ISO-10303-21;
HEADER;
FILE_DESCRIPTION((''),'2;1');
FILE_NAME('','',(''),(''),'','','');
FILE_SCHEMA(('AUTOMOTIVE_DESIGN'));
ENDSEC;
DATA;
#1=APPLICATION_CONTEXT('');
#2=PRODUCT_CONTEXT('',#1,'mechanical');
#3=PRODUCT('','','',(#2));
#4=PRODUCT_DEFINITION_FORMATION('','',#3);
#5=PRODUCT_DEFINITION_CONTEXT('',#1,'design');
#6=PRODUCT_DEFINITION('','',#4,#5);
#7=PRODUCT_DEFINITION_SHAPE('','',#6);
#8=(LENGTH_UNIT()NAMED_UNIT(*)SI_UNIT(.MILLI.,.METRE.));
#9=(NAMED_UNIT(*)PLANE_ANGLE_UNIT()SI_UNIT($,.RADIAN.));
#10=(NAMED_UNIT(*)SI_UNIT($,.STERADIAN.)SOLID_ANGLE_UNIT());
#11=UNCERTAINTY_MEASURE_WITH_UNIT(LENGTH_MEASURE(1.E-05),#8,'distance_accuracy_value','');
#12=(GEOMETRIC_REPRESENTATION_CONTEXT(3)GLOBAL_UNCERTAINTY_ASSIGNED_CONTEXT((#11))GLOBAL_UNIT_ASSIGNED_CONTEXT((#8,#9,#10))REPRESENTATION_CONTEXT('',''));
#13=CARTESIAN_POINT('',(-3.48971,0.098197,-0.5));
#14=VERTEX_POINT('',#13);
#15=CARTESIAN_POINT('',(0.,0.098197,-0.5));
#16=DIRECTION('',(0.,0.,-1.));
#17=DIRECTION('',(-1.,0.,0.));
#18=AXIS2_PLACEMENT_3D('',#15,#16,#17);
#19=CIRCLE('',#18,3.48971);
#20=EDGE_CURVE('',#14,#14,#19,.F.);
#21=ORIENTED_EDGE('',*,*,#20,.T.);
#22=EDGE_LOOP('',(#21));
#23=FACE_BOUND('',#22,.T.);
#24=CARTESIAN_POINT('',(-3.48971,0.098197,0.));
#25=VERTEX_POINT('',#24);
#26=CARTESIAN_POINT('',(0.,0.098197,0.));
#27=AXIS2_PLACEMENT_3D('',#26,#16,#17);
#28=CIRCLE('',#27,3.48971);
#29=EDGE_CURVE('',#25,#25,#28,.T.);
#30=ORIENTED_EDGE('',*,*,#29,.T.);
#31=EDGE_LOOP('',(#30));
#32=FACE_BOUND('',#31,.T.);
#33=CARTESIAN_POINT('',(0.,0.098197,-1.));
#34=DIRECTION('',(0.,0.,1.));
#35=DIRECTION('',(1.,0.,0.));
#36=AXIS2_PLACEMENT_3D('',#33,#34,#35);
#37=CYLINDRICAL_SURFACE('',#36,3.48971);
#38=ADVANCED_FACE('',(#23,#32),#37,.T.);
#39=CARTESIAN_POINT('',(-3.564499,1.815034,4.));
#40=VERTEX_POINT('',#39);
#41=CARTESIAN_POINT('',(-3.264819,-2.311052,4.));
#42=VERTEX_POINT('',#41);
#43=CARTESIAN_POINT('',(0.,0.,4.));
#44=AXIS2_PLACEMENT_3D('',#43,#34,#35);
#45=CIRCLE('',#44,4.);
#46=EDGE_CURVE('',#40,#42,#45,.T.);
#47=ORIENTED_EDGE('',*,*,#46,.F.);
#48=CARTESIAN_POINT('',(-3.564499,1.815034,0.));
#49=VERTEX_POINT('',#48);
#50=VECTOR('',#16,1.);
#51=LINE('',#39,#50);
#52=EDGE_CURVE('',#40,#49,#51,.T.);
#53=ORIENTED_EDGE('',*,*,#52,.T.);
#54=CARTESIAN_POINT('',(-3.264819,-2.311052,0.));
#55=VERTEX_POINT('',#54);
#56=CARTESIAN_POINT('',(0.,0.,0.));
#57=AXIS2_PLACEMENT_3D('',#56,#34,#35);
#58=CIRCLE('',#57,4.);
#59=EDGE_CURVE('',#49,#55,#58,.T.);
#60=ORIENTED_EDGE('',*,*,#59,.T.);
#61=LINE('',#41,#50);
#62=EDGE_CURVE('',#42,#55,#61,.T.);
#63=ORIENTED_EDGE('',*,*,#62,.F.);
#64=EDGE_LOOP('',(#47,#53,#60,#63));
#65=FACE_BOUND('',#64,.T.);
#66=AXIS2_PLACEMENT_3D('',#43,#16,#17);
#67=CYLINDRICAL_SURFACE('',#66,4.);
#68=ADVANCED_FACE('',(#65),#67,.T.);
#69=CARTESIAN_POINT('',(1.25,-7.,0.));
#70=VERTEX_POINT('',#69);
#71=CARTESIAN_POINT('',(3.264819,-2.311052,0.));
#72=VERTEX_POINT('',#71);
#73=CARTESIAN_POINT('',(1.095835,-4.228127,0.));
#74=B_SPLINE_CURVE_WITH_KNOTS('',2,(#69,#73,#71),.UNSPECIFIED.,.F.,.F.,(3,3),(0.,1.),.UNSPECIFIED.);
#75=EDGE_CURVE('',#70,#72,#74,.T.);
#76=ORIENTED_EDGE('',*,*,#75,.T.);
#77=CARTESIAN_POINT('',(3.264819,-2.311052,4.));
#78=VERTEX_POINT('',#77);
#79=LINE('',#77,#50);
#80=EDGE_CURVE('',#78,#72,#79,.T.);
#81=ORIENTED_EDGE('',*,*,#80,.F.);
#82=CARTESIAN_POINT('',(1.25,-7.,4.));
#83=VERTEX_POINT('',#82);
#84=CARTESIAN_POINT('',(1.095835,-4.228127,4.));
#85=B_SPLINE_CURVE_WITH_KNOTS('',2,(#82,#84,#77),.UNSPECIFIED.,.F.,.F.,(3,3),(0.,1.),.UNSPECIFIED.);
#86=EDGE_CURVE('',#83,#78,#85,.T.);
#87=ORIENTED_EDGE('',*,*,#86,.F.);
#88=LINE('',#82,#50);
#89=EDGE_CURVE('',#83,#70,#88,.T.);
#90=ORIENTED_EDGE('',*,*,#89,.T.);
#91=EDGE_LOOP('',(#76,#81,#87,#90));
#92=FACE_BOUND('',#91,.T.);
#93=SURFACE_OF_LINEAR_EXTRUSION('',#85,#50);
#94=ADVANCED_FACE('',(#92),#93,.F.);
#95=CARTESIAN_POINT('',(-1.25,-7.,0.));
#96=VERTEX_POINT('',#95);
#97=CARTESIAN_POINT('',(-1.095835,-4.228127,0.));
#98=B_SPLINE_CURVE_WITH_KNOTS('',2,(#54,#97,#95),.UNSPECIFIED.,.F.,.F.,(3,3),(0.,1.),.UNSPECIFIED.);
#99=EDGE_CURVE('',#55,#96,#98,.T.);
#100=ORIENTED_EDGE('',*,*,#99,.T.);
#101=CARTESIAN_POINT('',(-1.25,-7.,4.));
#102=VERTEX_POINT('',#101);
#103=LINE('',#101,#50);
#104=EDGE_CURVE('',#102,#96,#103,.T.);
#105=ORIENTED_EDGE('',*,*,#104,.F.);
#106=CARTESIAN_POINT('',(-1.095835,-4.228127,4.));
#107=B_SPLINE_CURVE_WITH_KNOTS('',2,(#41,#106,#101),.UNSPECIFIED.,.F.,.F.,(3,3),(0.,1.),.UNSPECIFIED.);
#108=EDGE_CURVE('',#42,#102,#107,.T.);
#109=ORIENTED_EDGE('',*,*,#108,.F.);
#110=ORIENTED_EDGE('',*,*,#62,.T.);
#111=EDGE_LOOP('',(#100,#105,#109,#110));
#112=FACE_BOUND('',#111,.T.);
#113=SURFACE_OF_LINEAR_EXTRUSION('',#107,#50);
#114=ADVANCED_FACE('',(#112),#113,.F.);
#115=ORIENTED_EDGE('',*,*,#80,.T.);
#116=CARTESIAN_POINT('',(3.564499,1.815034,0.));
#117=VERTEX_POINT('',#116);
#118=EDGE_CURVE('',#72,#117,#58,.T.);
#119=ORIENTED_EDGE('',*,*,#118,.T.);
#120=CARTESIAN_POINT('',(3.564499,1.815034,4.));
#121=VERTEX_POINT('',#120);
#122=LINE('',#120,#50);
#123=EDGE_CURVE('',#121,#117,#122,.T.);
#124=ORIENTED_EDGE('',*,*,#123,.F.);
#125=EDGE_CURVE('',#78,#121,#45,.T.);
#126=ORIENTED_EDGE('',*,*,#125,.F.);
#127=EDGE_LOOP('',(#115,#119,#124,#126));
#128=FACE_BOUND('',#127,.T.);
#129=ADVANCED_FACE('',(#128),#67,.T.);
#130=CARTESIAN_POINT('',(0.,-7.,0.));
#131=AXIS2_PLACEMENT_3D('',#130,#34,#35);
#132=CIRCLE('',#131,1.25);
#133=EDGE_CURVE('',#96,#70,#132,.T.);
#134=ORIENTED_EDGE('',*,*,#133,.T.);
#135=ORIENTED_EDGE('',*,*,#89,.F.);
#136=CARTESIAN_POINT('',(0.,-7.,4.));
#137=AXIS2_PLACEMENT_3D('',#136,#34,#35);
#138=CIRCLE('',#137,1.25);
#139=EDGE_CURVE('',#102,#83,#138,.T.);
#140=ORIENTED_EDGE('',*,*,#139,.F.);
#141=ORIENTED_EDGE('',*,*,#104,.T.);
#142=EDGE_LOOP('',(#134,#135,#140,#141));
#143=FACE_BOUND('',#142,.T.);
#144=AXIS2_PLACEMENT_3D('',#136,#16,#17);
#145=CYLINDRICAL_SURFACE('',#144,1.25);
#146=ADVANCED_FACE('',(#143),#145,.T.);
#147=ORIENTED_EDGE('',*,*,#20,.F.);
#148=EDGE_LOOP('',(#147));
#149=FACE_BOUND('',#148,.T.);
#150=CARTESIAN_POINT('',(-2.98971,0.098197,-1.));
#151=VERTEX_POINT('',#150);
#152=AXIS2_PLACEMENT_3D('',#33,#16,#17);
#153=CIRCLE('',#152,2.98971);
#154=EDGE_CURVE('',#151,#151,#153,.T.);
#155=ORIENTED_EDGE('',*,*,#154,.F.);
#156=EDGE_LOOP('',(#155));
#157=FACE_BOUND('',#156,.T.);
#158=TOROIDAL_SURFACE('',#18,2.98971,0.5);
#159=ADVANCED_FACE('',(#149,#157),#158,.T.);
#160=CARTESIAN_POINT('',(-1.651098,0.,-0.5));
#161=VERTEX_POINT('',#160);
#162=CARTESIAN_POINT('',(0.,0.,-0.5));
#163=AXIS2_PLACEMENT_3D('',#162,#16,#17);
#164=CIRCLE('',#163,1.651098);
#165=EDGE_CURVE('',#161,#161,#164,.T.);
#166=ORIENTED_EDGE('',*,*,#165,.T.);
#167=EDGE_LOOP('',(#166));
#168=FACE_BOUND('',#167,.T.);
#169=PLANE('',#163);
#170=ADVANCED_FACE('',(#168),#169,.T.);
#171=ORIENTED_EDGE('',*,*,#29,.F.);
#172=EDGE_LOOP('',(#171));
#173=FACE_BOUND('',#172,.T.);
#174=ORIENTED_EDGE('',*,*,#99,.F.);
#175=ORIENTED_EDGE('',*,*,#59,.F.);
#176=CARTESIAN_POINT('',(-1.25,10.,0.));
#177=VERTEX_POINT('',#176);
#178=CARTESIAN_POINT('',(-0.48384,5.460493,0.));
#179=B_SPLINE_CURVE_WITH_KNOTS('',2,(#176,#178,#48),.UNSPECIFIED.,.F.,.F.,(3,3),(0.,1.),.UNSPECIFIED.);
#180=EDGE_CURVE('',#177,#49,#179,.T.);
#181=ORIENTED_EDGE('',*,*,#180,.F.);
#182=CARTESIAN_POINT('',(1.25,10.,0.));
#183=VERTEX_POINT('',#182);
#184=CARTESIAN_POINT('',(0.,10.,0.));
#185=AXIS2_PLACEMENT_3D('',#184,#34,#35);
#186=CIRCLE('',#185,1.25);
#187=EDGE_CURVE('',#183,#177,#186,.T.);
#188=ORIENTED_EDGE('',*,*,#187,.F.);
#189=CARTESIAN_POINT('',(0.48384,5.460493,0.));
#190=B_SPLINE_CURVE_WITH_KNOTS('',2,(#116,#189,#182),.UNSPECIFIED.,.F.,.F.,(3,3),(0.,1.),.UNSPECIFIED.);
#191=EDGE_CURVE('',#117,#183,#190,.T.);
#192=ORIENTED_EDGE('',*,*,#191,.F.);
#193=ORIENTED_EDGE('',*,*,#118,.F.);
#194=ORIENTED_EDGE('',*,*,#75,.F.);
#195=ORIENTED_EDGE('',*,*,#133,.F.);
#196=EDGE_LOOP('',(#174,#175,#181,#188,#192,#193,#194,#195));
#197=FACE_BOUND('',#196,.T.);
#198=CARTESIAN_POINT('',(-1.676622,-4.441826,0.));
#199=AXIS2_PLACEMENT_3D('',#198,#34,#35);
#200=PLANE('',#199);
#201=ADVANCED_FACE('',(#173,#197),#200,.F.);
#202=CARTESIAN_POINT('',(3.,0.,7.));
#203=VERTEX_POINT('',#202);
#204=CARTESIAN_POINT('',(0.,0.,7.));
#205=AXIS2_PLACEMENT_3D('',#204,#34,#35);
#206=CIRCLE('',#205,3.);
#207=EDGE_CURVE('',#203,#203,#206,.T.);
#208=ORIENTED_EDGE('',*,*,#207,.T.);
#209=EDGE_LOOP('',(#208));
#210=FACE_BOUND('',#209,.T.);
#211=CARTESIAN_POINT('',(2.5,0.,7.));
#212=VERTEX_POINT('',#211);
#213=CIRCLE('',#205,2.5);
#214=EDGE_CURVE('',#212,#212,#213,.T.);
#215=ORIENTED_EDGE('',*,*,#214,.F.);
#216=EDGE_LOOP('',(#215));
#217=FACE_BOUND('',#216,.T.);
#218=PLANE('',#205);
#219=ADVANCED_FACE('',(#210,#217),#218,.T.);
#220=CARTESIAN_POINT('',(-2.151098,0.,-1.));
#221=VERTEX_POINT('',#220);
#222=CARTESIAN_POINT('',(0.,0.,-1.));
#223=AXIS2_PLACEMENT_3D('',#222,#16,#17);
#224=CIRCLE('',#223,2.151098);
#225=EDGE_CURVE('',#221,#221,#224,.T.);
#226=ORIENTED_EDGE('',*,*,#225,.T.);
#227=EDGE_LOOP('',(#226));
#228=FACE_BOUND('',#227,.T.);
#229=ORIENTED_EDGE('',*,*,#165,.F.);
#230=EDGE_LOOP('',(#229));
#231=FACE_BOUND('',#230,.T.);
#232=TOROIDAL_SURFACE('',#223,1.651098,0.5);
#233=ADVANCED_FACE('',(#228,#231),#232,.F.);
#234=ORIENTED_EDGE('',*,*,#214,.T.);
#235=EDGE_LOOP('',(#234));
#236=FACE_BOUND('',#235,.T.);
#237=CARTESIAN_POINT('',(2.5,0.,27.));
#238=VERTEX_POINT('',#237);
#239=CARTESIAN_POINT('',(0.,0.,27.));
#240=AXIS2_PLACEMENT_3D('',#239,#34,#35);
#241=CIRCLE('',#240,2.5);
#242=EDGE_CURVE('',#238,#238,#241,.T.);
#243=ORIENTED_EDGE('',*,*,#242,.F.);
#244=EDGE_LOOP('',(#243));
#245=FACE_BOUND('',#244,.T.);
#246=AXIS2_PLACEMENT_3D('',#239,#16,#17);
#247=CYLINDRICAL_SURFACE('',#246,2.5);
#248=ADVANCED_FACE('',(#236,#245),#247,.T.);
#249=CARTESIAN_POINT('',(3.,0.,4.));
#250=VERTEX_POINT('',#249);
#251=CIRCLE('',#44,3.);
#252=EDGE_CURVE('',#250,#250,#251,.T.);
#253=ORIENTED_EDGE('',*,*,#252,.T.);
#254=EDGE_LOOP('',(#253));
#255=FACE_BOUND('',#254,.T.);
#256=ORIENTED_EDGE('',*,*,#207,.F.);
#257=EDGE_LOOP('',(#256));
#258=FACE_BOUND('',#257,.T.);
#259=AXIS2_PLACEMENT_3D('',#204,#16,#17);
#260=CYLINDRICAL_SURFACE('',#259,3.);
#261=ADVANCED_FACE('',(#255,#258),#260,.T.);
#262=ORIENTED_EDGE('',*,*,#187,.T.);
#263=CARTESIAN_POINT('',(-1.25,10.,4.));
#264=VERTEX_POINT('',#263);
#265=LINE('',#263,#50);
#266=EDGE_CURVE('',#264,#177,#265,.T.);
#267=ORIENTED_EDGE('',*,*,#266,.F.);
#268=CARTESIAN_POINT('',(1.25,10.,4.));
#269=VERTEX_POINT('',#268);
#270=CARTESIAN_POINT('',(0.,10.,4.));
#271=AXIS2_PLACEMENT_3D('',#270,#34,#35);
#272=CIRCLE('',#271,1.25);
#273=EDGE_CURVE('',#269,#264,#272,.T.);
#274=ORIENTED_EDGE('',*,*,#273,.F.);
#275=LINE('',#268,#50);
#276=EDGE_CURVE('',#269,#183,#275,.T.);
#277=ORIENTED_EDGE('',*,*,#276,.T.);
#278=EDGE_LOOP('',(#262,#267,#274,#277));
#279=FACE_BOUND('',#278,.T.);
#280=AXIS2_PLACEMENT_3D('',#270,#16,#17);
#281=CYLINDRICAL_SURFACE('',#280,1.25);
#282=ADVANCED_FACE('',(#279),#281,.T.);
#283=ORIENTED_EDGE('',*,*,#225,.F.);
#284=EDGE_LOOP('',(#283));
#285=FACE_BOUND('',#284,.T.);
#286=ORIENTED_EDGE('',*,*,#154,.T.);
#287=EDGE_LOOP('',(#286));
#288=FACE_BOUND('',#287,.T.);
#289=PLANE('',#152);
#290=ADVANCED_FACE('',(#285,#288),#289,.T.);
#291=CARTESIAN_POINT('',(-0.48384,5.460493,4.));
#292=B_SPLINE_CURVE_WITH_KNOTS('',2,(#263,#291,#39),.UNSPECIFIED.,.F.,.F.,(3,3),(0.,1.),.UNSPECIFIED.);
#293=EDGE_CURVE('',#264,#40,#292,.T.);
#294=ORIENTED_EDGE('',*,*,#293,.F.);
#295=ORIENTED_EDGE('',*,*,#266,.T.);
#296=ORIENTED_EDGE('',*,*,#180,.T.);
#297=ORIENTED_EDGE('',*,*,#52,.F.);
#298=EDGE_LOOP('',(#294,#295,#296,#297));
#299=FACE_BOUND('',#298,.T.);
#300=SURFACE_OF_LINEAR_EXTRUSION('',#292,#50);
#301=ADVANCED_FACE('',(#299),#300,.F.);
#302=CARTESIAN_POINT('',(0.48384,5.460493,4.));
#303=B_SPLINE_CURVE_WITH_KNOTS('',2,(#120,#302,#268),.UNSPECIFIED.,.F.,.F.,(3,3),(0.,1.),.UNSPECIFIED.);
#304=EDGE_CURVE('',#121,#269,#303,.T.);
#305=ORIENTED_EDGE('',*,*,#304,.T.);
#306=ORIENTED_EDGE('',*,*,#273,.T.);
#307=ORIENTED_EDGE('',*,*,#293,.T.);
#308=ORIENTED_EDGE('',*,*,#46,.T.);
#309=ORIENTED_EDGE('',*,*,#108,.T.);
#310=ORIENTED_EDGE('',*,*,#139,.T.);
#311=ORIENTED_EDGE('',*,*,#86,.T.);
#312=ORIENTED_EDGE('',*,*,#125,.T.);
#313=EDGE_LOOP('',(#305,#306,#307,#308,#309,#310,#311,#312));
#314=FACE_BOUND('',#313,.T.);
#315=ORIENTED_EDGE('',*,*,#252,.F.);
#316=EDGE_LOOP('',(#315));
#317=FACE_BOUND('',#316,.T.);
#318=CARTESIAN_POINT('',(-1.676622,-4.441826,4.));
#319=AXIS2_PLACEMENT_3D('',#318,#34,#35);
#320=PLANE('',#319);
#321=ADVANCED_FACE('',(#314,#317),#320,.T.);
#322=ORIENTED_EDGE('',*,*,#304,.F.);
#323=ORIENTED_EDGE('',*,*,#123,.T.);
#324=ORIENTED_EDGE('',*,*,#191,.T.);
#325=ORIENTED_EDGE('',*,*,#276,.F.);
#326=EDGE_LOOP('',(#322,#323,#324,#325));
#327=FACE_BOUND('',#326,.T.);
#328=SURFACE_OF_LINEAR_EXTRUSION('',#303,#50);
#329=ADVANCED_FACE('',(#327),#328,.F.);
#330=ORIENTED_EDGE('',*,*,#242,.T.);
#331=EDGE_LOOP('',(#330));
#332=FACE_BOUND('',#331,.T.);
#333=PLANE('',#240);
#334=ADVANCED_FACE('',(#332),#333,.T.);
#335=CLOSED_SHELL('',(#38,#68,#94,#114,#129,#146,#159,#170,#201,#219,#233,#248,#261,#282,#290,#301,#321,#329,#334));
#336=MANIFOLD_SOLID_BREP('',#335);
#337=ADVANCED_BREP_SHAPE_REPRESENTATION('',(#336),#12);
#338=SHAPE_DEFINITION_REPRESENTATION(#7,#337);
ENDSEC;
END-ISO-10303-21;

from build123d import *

# Parameters (mm, degrees)
EXTRUDE_1_DEPTH     = 4
SKETCH_2_R          = 3.489709511
EXTRUDE_2_DEPTH     = 1
SKETCH_3_R          = 2.151097983
CUT_EXTRUDE_1_DEPTH = 0.5
FILLET_1_R          = 0.5
FILLET_2_R          = 0.5
SKETCH_4_R          = 3
EXTRUDE_3_DEPTH     = 3
SKETCH_5_R          = 2.5
EXTRUDE_4_DEPTH     = 20


with BuildPart() as part:
    # 草图1 → 凸台-拉伸1 (new body)
    with BuildSketch(Plane.XY):
        with BuildLine():
            ThreePointArc((3.264818601, -2.311051601), (3.989491131, -0.289759403), (3.564498931, 1.815033712))
            add(Edge.make_bspline(
                [(3.564498931, 1.815033712), (0.483839944, 5.460493331), (1.25, 10)],
                knots=[0, 0, 0, 1, 1, 1], degree=2))
            ThreePointArc((1.25, 10), (0, 11.25), (-1.25, 10))
            add(Edge.make_bspline(
                [(-3.564498931, 1.815033712), (-0.483839944, 5.460493331), (-1.25, 10)],
                knots=[0, 0, 0, 1, 1, 1], degree=2))
            ThreePointArc((-3.564498931, 1.815033712), (-3.989491131, -0.289759403), (-3.264818601, -2.311051601))
            add(Edge.make_bspline(
                [(-3.264818601, -2.311051601), (-1.095834513, -4.228126611), (-1.25, -7)],
                knots=[0, 0, 0, 1, 1, 1], degree=2))
            ThreePointArc((-1.25, -7), (0, -8.25), (1.25, -7))
            add(Edge.make_bspline(
                [(3.264818601, -2.311051601), (1.095834513, -4.228126611), (1.25, -7)],
                knots=[0, 0, 0, 1, 1, 1], degree=2))
        make_face()
    extrude(amount=EXTRUDE_1_DEPTH)

    # 草图2 → 凸台-拉伸2 (add)
    with BuildSketch(Plane(origin=(0, 0, 0), x_dir=(-1, 0, 0), z_dir=(0, 0, -1))):
        with Locations((0, 0.098197479)):
            Circle(SKETCH_2_R)
    extrude(amount=EXTRUDE_2_DEPTH)

    # 草图3 → 切除-拉伸1 (cut)
    with BuildSketch(Plane(origin=(0, 0, -1), x_dir=(-1, 0, 0), z_dir=(0, 0, -1))):
        Circle(SKETCH_3_R)
    extrude(amount=-CUT_EXTRUDE_1_DEPTH, mode=Mode.SUBTRACT)

    # 圆角1
    fillet_1_edges = [part.edges().sort_by_distance(p)[0] for p in [
        (2.151097983, 0, -0.5),
    ]]
    fillet(fillet_1_edges, radius=FILLET_1_R - 0.0001)  # a hair under: the kernel refuses the full size

    # 圆角2
    fillet_2_edges = [part.edges().sort_by_distance(p)[0] for p in [
        (3.489709511, 0.098197479, -1),
    ]]
    fillet(fillet_2_edges, radius=FILLET_2_R)

    # 草图4 → 凸台-拉伸3 (add)
    with BuildSketch(Plane.XY.offset(4)):
        Circle(SKETCH_4_R)
    extrude(amount=EXTRUDE_3_DEPTH)

    # 草图5 → 凸台-拉伸4 (add)
    with BuildSketch(Plane.XY.offset(7)):
        Circle(SKETCH_5_R)
    extrude(amount=EXTRUDE_4_DEPTH)


solid = part.part
